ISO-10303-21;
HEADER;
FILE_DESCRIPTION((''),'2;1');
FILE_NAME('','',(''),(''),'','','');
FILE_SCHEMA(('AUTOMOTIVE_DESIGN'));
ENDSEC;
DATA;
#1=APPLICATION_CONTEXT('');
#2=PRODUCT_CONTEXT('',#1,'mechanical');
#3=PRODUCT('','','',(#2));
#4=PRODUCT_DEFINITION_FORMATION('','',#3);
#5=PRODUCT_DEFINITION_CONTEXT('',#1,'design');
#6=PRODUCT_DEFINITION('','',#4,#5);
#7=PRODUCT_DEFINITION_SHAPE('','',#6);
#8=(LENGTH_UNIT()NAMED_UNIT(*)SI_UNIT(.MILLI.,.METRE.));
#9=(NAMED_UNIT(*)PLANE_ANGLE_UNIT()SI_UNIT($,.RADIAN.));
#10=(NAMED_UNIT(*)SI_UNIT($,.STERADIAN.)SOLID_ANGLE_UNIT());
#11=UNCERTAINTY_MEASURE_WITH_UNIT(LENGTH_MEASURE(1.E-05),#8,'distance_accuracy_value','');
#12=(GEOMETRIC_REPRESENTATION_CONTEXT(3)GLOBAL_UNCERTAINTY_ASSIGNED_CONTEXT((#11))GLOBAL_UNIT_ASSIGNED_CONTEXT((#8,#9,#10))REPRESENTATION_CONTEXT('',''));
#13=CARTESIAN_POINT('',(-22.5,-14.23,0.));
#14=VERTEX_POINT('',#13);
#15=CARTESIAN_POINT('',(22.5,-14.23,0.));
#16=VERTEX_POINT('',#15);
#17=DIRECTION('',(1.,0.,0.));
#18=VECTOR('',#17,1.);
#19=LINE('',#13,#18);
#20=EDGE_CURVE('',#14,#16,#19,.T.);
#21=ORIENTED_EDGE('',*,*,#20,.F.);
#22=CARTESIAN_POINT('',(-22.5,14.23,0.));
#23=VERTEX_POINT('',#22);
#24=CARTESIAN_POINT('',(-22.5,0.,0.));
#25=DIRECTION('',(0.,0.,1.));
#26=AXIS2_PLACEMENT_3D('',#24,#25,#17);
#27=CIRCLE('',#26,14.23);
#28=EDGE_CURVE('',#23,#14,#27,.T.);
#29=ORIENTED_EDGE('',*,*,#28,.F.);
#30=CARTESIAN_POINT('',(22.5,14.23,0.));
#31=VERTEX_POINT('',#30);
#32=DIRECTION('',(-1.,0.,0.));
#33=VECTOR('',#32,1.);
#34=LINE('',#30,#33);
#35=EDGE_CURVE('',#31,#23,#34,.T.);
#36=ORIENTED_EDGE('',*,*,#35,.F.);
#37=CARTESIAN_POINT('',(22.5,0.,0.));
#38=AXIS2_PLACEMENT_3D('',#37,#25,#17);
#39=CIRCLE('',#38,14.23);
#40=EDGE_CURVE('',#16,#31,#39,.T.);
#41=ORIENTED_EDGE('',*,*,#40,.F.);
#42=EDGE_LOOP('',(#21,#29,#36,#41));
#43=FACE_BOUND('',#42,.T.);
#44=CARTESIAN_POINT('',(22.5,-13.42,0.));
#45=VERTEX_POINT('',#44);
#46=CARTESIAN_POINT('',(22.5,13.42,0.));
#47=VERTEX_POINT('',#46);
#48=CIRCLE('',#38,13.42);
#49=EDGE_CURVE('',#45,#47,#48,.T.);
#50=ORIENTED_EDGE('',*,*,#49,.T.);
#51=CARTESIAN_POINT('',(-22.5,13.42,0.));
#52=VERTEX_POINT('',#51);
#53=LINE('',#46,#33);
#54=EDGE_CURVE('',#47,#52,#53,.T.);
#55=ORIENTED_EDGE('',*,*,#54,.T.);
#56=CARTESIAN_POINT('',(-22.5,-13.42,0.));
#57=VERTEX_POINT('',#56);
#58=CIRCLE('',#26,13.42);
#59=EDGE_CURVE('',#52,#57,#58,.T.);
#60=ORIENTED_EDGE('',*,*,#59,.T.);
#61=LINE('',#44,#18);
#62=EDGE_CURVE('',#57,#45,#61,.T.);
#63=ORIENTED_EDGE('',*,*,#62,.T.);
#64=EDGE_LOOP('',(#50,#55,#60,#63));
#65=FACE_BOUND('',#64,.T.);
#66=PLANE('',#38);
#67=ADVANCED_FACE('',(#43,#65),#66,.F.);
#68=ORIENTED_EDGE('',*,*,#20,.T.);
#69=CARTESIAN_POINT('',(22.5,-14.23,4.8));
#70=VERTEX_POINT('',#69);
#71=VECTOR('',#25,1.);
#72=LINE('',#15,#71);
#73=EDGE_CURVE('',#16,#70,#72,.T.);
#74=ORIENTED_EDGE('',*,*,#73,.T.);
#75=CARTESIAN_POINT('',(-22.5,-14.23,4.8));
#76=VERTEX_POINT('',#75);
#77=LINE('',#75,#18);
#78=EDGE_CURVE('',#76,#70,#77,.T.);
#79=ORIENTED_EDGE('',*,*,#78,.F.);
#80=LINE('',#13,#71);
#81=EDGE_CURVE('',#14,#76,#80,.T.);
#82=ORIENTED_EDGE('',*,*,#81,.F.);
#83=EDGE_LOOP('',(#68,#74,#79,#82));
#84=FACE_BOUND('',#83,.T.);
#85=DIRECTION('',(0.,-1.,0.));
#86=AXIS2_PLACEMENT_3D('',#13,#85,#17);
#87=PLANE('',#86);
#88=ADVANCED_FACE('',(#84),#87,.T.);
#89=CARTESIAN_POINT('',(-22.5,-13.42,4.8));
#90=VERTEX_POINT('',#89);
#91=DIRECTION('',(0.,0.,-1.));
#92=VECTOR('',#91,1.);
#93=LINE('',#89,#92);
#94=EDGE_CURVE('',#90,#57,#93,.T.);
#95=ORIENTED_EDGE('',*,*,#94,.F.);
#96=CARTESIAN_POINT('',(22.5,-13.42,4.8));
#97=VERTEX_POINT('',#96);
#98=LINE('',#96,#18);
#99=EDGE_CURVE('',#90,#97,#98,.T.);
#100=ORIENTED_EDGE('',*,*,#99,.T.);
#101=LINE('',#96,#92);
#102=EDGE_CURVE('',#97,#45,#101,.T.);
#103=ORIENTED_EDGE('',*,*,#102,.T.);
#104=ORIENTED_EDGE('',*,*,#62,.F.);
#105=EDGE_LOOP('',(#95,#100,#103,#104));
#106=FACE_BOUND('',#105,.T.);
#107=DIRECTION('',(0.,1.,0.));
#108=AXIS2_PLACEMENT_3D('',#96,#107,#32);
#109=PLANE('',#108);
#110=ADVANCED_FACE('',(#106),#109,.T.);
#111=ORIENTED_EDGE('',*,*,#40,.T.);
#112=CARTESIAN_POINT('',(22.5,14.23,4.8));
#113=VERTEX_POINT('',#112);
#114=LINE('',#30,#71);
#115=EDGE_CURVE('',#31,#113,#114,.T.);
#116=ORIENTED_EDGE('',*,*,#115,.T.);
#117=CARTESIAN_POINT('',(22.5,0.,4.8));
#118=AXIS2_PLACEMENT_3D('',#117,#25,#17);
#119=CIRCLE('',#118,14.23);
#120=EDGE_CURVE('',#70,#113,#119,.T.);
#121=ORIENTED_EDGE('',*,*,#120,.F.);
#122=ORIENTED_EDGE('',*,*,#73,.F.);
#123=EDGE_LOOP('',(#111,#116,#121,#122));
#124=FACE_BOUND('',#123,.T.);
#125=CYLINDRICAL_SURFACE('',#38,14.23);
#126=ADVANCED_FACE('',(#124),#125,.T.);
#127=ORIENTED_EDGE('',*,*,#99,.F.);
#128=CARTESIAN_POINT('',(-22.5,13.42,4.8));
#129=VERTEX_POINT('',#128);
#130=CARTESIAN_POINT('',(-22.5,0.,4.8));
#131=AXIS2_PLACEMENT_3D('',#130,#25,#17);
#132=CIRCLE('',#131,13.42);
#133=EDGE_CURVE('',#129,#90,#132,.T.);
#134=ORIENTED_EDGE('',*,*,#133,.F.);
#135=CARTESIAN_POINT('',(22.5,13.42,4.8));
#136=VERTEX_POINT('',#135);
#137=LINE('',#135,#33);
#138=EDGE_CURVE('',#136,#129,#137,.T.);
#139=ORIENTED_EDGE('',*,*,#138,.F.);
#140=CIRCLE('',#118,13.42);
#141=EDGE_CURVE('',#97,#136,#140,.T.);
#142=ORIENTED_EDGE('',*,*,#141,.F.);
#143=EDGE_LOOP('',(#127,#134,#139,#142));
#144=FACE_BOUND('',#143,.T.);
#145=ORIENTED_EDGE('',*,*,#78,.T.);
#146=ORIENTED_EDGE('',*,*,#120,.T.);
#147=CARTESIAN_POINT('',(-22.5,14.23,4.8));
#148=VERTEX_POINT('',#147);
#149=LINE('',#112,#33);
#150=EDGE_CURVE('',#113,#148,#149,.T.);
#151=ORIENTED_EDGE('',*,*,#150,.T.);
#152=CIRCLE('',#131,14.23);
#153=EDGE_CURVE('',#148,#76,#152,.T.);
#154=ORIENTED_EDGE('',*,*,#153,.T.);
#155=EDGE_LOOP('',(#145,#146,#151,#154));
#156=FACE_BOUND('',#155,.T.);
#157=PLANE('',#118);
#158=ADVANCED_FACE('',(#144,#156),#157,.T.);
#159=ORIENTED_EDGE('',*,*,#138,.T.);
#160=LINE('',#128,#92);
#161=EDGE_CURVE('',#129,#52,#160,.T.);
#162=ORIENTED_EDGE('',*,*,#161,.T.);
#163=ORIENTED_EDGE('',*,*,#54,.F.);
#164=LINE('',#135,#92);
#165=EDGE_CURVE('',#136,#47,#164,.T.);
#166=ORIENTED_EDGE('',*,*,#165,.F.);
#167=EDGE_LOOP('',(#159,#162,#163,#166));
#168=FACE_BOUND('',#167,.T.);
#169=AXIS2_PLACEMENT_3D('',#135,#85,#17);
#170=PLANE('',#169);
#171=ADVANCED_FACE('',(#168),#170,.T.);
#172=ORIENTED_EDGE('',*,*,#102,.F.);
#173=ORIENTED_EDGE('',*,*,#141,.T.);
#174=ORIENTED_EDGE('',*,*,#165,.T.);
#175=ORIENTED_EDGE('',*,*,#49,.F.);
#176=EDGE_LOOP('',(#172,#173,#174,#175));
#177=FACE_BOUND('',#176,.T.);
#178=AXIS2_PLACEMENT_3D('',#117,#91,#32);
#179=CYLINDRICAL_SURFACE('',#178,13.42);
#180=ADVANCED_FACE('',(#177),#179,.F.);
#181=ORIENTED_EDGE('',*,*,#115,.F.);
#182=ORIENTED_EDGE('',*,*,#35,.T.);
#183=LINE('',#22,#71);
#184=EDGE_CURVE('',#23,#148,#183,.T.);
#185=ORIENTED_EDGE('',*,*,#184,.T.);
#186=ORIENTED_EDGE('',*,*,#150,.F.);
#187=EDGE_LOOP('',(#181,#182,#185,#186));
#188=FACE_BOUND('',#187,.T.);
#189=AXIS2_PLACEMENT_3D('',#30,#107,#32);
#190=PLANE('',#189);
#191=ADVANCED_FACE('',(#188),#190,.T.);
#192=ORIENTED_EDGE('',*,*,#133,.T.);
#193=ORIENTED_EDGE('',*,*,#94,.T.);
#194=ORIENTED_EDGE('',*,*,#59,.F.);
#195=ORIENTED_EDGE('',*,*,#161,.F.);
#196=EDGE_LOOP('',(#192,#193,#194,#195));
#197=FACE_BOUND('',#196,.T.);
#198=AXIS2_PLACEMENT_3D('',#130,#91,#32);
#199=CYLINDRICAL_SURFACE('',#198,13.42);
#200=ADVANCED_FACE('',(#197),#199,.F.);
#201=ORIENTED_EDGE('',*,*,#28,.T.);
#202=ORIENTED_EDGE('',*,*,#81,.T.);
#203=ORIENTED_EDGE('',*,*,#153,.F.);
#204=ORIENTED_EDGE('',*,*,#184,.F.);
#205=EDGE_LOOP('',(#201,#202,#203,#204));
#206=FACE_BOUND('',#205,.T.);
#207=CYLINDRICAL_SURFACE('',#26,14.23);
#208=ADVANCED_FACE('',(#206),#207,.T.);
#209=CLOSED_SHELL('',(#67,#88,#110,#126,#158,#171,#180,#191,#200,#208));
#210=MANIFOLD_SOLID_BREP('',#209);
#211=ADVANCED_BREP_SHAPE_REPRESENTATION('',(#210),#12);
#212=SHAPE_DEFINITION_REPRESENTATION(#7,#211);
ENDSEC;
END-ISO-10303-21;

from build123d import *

# Parameters (mm, degrees)
EXTRUDE_1_DEPTH = 4.8
EXTRUDE_2_DEPTH = 4.8


# Read off the part's stored shape, not the designer's step: 交差1
with BuildPart() as part:
    # ｽｹｯﾁ1 → 押し出し-薄板1 (new body)
    with BuildSketch(Plane.XY):
        with BuildLine():
            Line((-22.5, 14.23), (22.5, 14.23))
            ThreePointArc((22.5, 14.23), (36.73, 0), (22.5, -14.23))
            Line((22.5, -14.23), (-22.5, -14.23))
            ThreePointArc((-22.5, -14.23), (-36.73, 0), (-22.5, 14.23))
        make_face()
        with BuildLine():
            Line((-22.5, 13.42), (22.5, 13.42))
            ThreePointArc((22.5, 13.42), (35.92, 0), (22.5, -13.42))
            Line((22.5, -13.42), (-22.5, -13.42))
            ThreePointArc((-22.5, -13.42), (-35.92, 0), (-22.5, 13.42))
        make_face(mode=Mode.SUBTRACT)
    extrude(amount=EXTRUDE_1_DEPTH)


with BuildPart() as body_2:
    # ｽｹｯﾁ2 → 押し出し-薄板2 (new body)
    with BuildSketch(Plane.XY.offset(4.8)):
        with BuildLine():
            Line((-22.5, -14.23), (22.5, -14.23))
            ThreePointArc((22.5, -14.23), (36.73, 0), (22.5, 14.23))
            Line((22.5, 14.23), (-22.5, 14.23))
            ThreePointArc((-22.5, 14.23), (-36.73, 0), (-22.5, -14.23))
        make_face()
        with BuildLine():
            Line((-22.5, -13.93), (22.5, -13.93))
            ThreePointArc((22.5, -13.93), (36.43, 0), (22.5, 13.93))
            Line((22.5, 13.93), (-22.5, 13.93))
            ThreePointArc((-22.5, 13.93), (-36.43, 0), (-22.5, -13.93))
        make_face(mode=Mode.SUBTRACT)
    extrude(amount=-EXTRUDE_2_DEPTH)


solid = part.part
